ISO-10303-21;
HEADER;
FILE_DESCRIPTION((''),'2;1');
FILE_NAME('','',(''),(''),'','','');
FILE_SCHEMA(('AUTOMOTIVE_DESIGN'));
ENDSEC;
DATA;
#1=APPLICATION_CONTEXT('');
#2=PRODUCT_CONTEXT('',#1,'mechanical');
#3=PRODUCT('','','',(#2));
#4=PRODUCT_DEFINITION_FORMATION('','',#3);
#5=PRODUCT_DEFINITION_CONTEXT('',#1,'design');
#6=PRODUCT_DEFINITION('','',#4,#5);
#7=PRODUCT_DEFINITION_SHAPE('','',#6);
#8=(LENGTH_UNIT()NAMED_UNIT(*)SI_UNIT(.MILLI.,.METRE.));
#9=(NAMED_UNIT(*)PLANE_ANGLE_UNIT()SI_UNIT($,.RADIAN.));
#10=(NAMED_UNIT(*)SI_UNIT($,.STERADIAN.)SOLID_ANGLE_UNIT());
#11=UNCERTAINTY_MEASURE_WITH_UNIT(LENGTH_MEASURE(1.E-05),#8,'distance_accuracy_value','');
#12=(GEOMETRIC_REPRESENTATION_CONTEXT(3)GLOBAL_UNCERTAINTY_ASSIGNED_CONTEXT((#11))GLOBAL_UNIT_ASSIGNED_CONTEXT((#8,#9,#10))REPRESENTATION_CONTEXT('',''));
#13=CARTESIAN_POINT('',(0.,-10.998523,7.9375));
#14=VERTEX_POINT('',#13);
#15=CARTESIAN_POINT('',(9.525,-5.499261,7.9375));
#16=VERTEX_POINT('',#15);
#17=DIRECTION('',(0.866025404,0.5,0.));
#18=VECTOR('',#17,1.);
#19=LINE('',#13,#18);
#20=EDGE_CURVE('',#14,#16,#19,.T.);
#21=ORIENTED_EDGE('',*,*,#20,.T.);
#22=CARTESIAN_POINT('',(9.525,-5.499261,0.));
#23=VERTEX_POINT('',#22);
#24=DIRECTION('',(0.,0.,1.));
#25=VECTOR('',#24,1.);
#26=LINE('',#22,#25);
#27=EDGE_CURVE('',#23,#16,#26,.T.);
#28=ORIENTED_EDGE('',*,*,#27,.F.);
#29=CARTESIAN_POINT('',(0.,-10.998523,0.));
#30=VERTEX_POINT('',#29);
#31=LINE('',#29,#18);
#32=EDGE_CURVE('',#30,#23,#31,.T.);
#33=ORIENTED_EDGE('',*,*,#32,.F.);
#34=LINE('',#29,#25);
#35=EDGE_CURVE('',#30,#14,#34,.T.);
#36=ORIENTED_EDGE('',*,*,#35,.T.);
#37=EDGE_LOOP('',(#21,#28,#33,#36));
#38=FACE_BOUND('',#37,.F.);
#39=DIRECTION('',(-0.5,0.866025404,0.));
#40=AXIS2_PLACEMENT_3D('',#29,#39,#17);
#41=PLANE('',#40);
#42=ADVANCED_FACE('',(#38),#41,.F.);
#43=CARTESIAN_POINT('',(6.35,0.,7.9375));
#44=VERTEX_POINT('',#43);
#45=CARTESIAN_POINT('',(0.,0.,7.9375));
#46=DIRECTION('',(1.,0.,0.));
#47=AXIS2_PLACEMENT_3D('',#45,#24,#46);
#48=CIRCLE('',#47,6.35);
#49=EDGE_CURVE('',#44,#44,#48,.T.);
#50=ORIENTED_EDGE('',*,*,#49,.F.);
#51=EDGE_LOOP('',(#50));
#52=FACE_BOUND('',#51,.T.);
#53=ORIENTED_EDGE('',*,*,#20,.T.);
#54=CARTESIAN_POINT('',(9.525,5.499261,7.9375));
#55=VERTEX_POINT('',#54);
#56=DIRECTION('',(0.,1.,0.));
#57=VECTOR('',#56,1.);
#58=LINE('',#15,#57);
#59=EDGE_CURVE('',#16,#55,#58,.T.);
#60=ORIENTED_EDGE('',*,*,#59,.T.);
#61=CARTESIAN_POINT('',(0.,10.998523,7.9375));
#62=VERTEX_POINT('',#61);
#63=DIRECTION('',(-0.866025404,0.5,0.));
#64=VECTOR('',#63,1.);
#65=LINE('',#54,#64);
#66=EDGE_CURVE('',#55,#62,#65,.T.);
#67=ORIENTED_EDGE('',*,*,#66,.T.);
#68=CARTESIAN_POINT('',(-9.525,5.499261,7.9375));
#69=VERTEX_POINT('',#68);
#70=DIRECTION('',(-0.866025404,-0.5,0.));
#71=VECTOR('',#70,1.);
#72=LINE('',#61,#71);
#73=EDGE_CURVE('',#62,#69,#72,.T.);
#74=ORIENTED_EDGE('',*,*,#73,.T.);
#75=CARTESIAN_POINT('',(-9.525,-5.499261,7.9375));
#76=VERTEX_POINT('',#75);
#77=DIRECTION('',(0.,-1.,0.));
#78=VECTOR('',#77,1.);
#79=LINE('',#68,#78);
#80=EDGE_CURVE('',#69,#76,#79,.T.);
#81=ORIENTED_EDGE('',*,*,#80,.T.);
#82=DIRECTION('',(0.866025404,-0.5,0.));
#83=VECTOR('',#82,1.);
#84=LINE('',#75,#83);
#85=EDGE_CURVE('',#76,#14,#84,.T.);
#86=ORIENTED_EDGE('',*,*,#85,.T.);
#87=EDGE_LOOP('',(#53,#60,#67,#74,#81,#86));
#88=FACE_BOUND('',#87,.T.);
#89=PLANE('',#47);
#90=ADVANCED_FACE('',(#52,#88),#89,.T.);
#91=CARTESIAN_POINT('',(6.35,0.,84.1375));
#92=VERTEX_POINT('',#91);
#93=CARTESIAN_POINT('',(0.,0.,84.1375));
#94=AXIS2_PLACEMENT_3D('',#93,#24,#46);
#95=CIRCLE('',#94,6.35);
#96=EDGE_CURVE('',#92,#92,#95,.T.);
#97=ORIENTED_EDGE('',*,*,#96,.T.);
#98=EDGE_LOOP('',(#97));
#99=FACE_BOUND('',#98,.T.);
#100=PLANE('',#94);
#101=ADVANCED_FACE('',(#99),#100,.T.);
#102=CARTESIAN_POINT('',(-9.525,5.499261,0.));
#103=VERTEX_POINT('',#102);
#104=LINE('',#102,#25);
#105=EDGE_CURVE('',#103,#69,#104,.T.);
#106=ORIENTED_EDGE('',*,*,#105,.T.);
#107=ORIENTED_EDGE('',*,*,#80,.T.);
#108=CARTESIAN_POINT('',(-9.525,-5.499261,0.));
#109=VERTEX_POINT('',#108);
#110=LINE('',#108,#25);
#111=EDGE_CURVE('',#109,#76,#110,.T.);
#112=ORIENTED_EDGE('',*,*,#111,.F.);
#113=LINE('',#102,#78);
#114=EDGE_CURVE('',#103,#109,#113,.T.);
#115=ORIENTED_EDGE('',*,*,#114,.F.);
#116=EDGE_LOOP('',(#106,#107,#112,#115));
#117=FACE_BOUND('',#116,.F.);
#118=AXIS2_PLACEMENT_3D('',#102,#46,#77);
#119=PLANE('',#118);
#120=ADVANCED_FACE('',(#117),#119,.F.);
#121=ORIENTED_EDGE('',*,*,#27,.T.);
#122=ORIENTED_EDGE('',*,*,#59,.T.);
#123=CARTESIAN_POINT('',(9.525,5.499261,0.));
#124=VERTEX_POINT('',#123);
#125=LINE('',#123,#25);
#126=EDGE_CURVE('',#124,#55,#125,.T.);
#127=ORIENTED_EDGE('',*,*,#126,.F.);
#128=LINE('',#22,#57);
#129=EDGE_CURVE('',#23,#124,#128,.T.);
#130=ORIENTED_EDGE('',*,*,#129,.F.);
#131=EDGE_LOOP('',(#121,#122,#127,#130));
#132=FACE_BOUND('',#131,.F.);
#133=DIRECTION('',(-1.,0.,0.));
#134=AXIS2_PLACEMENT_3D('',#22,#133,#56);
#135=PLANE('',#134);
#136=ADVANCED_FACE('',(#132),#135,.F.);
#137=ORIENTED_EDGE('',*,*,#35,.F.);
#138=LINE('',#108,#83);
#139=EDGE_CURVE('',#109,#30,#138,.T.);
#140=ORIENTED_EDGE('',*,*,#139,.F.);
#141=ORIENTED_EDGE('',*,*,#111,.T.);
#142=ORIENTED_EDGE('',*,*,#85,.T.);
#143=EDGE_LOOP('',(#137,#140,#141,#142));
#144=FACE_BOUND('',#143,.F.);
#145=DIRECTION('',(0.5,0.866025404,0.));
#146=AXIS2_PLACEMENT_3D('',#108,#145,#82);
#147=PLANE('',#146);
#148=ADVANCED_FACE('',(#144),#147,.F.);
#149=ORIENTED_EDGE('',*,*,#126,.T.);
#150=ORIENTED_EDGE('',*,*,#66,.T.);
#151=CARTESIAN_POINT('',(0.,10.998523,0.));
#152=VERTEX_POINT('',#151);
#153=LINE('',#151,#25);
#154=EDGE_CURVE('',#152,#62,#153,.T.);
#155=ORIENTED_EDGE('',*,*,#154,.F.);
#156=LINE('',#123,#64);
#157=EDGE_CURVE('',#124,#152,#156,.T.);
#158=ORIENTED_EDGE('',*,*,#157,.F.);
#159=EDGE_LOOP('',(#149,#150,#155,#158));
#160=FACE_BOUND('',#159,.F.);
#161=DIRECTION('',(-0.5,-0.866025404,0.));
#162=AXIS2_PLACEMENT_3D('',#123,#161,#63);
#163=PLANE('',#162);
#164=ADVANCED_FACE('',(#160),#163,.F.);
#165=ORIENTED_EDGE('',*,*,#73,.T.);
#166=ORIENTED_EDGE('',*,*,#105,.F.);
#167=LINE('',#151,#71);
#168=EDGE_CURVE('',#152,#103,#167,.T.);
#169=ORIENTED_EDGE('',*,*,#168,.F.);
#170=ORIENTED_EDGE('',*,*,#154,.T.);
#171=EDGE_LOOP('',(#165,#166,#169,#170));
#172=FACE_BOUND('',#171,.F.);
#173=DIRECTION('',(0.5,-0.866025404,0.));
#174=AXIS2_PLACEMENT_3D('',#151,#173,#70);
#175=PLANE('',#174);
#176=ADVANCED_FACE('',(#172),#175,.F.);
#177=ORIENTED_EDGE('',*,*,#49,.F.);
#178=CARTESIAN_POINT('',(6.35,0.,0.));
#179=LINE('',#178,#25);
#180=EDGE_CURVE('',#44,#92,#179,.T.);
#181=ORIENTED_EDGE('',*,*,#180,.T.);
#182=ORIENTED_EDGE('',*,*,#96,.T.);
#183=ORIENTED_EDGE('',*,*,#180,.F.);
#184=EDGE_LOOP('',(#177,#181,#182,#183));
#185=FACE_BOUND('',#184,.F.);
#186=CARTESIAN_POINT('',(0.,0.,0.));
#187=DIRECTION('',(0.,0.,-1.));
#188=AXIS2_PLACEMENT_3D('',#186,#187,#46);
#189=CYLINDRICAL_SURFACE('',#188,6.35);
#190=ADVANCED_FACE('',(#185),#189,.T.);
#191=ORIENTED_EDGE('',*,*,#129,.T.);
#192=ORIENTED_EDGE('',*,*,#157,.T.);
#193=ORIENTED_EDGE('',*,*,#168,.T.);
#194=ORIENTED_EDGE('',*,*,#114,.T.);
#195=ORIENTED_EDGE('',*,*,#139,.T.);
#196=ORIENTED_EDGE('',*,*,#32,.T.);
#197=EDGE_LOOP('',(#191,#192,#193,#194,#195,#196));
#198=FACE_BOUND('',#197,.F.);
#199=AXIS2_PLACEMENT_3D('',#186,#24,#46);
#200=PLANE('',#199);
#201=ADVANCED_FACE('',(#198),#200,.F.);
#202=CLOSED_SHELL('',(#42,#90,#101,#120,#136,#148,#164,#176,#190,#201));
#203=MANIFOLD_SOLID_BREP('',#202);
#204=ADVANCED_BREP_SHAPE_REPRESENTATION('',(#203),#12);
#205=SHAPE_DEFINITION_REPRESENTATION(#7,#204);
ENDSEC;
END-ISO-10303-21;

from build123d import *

# Parameters (mm, degrees)
F1_R     = 6.35
F2_DEPTH = 7.9375
F3_DEPTH = 84.1375


# Not quite as in the source:
# - a variable given as a bare number and used for a length is read in inches; the dataset says mm whatever the document's units were


with BuildPart() as f2:
    # F1 (on Top) → F2 (new body)
    with BuildSketch(Plane.XY):
        Polygon((9.525, -5.499261314), (9.525, 5.499261314), (0, 10.9985226281), (-9.525, 5.499261314), (-9.525, -5.499261314), (0, -10.9985226281), align=None)
        Circle(F1_R, mode=Mode.SUBTRACT)
    extrude(amount=F2_DEPTH)

    # F1 (on Top) → F3 (join)
    with BuildSketch(Plane.XY):
        Circle(F1_R)
    extrude(amount=F3_DEPTH)


solid = f2.part
